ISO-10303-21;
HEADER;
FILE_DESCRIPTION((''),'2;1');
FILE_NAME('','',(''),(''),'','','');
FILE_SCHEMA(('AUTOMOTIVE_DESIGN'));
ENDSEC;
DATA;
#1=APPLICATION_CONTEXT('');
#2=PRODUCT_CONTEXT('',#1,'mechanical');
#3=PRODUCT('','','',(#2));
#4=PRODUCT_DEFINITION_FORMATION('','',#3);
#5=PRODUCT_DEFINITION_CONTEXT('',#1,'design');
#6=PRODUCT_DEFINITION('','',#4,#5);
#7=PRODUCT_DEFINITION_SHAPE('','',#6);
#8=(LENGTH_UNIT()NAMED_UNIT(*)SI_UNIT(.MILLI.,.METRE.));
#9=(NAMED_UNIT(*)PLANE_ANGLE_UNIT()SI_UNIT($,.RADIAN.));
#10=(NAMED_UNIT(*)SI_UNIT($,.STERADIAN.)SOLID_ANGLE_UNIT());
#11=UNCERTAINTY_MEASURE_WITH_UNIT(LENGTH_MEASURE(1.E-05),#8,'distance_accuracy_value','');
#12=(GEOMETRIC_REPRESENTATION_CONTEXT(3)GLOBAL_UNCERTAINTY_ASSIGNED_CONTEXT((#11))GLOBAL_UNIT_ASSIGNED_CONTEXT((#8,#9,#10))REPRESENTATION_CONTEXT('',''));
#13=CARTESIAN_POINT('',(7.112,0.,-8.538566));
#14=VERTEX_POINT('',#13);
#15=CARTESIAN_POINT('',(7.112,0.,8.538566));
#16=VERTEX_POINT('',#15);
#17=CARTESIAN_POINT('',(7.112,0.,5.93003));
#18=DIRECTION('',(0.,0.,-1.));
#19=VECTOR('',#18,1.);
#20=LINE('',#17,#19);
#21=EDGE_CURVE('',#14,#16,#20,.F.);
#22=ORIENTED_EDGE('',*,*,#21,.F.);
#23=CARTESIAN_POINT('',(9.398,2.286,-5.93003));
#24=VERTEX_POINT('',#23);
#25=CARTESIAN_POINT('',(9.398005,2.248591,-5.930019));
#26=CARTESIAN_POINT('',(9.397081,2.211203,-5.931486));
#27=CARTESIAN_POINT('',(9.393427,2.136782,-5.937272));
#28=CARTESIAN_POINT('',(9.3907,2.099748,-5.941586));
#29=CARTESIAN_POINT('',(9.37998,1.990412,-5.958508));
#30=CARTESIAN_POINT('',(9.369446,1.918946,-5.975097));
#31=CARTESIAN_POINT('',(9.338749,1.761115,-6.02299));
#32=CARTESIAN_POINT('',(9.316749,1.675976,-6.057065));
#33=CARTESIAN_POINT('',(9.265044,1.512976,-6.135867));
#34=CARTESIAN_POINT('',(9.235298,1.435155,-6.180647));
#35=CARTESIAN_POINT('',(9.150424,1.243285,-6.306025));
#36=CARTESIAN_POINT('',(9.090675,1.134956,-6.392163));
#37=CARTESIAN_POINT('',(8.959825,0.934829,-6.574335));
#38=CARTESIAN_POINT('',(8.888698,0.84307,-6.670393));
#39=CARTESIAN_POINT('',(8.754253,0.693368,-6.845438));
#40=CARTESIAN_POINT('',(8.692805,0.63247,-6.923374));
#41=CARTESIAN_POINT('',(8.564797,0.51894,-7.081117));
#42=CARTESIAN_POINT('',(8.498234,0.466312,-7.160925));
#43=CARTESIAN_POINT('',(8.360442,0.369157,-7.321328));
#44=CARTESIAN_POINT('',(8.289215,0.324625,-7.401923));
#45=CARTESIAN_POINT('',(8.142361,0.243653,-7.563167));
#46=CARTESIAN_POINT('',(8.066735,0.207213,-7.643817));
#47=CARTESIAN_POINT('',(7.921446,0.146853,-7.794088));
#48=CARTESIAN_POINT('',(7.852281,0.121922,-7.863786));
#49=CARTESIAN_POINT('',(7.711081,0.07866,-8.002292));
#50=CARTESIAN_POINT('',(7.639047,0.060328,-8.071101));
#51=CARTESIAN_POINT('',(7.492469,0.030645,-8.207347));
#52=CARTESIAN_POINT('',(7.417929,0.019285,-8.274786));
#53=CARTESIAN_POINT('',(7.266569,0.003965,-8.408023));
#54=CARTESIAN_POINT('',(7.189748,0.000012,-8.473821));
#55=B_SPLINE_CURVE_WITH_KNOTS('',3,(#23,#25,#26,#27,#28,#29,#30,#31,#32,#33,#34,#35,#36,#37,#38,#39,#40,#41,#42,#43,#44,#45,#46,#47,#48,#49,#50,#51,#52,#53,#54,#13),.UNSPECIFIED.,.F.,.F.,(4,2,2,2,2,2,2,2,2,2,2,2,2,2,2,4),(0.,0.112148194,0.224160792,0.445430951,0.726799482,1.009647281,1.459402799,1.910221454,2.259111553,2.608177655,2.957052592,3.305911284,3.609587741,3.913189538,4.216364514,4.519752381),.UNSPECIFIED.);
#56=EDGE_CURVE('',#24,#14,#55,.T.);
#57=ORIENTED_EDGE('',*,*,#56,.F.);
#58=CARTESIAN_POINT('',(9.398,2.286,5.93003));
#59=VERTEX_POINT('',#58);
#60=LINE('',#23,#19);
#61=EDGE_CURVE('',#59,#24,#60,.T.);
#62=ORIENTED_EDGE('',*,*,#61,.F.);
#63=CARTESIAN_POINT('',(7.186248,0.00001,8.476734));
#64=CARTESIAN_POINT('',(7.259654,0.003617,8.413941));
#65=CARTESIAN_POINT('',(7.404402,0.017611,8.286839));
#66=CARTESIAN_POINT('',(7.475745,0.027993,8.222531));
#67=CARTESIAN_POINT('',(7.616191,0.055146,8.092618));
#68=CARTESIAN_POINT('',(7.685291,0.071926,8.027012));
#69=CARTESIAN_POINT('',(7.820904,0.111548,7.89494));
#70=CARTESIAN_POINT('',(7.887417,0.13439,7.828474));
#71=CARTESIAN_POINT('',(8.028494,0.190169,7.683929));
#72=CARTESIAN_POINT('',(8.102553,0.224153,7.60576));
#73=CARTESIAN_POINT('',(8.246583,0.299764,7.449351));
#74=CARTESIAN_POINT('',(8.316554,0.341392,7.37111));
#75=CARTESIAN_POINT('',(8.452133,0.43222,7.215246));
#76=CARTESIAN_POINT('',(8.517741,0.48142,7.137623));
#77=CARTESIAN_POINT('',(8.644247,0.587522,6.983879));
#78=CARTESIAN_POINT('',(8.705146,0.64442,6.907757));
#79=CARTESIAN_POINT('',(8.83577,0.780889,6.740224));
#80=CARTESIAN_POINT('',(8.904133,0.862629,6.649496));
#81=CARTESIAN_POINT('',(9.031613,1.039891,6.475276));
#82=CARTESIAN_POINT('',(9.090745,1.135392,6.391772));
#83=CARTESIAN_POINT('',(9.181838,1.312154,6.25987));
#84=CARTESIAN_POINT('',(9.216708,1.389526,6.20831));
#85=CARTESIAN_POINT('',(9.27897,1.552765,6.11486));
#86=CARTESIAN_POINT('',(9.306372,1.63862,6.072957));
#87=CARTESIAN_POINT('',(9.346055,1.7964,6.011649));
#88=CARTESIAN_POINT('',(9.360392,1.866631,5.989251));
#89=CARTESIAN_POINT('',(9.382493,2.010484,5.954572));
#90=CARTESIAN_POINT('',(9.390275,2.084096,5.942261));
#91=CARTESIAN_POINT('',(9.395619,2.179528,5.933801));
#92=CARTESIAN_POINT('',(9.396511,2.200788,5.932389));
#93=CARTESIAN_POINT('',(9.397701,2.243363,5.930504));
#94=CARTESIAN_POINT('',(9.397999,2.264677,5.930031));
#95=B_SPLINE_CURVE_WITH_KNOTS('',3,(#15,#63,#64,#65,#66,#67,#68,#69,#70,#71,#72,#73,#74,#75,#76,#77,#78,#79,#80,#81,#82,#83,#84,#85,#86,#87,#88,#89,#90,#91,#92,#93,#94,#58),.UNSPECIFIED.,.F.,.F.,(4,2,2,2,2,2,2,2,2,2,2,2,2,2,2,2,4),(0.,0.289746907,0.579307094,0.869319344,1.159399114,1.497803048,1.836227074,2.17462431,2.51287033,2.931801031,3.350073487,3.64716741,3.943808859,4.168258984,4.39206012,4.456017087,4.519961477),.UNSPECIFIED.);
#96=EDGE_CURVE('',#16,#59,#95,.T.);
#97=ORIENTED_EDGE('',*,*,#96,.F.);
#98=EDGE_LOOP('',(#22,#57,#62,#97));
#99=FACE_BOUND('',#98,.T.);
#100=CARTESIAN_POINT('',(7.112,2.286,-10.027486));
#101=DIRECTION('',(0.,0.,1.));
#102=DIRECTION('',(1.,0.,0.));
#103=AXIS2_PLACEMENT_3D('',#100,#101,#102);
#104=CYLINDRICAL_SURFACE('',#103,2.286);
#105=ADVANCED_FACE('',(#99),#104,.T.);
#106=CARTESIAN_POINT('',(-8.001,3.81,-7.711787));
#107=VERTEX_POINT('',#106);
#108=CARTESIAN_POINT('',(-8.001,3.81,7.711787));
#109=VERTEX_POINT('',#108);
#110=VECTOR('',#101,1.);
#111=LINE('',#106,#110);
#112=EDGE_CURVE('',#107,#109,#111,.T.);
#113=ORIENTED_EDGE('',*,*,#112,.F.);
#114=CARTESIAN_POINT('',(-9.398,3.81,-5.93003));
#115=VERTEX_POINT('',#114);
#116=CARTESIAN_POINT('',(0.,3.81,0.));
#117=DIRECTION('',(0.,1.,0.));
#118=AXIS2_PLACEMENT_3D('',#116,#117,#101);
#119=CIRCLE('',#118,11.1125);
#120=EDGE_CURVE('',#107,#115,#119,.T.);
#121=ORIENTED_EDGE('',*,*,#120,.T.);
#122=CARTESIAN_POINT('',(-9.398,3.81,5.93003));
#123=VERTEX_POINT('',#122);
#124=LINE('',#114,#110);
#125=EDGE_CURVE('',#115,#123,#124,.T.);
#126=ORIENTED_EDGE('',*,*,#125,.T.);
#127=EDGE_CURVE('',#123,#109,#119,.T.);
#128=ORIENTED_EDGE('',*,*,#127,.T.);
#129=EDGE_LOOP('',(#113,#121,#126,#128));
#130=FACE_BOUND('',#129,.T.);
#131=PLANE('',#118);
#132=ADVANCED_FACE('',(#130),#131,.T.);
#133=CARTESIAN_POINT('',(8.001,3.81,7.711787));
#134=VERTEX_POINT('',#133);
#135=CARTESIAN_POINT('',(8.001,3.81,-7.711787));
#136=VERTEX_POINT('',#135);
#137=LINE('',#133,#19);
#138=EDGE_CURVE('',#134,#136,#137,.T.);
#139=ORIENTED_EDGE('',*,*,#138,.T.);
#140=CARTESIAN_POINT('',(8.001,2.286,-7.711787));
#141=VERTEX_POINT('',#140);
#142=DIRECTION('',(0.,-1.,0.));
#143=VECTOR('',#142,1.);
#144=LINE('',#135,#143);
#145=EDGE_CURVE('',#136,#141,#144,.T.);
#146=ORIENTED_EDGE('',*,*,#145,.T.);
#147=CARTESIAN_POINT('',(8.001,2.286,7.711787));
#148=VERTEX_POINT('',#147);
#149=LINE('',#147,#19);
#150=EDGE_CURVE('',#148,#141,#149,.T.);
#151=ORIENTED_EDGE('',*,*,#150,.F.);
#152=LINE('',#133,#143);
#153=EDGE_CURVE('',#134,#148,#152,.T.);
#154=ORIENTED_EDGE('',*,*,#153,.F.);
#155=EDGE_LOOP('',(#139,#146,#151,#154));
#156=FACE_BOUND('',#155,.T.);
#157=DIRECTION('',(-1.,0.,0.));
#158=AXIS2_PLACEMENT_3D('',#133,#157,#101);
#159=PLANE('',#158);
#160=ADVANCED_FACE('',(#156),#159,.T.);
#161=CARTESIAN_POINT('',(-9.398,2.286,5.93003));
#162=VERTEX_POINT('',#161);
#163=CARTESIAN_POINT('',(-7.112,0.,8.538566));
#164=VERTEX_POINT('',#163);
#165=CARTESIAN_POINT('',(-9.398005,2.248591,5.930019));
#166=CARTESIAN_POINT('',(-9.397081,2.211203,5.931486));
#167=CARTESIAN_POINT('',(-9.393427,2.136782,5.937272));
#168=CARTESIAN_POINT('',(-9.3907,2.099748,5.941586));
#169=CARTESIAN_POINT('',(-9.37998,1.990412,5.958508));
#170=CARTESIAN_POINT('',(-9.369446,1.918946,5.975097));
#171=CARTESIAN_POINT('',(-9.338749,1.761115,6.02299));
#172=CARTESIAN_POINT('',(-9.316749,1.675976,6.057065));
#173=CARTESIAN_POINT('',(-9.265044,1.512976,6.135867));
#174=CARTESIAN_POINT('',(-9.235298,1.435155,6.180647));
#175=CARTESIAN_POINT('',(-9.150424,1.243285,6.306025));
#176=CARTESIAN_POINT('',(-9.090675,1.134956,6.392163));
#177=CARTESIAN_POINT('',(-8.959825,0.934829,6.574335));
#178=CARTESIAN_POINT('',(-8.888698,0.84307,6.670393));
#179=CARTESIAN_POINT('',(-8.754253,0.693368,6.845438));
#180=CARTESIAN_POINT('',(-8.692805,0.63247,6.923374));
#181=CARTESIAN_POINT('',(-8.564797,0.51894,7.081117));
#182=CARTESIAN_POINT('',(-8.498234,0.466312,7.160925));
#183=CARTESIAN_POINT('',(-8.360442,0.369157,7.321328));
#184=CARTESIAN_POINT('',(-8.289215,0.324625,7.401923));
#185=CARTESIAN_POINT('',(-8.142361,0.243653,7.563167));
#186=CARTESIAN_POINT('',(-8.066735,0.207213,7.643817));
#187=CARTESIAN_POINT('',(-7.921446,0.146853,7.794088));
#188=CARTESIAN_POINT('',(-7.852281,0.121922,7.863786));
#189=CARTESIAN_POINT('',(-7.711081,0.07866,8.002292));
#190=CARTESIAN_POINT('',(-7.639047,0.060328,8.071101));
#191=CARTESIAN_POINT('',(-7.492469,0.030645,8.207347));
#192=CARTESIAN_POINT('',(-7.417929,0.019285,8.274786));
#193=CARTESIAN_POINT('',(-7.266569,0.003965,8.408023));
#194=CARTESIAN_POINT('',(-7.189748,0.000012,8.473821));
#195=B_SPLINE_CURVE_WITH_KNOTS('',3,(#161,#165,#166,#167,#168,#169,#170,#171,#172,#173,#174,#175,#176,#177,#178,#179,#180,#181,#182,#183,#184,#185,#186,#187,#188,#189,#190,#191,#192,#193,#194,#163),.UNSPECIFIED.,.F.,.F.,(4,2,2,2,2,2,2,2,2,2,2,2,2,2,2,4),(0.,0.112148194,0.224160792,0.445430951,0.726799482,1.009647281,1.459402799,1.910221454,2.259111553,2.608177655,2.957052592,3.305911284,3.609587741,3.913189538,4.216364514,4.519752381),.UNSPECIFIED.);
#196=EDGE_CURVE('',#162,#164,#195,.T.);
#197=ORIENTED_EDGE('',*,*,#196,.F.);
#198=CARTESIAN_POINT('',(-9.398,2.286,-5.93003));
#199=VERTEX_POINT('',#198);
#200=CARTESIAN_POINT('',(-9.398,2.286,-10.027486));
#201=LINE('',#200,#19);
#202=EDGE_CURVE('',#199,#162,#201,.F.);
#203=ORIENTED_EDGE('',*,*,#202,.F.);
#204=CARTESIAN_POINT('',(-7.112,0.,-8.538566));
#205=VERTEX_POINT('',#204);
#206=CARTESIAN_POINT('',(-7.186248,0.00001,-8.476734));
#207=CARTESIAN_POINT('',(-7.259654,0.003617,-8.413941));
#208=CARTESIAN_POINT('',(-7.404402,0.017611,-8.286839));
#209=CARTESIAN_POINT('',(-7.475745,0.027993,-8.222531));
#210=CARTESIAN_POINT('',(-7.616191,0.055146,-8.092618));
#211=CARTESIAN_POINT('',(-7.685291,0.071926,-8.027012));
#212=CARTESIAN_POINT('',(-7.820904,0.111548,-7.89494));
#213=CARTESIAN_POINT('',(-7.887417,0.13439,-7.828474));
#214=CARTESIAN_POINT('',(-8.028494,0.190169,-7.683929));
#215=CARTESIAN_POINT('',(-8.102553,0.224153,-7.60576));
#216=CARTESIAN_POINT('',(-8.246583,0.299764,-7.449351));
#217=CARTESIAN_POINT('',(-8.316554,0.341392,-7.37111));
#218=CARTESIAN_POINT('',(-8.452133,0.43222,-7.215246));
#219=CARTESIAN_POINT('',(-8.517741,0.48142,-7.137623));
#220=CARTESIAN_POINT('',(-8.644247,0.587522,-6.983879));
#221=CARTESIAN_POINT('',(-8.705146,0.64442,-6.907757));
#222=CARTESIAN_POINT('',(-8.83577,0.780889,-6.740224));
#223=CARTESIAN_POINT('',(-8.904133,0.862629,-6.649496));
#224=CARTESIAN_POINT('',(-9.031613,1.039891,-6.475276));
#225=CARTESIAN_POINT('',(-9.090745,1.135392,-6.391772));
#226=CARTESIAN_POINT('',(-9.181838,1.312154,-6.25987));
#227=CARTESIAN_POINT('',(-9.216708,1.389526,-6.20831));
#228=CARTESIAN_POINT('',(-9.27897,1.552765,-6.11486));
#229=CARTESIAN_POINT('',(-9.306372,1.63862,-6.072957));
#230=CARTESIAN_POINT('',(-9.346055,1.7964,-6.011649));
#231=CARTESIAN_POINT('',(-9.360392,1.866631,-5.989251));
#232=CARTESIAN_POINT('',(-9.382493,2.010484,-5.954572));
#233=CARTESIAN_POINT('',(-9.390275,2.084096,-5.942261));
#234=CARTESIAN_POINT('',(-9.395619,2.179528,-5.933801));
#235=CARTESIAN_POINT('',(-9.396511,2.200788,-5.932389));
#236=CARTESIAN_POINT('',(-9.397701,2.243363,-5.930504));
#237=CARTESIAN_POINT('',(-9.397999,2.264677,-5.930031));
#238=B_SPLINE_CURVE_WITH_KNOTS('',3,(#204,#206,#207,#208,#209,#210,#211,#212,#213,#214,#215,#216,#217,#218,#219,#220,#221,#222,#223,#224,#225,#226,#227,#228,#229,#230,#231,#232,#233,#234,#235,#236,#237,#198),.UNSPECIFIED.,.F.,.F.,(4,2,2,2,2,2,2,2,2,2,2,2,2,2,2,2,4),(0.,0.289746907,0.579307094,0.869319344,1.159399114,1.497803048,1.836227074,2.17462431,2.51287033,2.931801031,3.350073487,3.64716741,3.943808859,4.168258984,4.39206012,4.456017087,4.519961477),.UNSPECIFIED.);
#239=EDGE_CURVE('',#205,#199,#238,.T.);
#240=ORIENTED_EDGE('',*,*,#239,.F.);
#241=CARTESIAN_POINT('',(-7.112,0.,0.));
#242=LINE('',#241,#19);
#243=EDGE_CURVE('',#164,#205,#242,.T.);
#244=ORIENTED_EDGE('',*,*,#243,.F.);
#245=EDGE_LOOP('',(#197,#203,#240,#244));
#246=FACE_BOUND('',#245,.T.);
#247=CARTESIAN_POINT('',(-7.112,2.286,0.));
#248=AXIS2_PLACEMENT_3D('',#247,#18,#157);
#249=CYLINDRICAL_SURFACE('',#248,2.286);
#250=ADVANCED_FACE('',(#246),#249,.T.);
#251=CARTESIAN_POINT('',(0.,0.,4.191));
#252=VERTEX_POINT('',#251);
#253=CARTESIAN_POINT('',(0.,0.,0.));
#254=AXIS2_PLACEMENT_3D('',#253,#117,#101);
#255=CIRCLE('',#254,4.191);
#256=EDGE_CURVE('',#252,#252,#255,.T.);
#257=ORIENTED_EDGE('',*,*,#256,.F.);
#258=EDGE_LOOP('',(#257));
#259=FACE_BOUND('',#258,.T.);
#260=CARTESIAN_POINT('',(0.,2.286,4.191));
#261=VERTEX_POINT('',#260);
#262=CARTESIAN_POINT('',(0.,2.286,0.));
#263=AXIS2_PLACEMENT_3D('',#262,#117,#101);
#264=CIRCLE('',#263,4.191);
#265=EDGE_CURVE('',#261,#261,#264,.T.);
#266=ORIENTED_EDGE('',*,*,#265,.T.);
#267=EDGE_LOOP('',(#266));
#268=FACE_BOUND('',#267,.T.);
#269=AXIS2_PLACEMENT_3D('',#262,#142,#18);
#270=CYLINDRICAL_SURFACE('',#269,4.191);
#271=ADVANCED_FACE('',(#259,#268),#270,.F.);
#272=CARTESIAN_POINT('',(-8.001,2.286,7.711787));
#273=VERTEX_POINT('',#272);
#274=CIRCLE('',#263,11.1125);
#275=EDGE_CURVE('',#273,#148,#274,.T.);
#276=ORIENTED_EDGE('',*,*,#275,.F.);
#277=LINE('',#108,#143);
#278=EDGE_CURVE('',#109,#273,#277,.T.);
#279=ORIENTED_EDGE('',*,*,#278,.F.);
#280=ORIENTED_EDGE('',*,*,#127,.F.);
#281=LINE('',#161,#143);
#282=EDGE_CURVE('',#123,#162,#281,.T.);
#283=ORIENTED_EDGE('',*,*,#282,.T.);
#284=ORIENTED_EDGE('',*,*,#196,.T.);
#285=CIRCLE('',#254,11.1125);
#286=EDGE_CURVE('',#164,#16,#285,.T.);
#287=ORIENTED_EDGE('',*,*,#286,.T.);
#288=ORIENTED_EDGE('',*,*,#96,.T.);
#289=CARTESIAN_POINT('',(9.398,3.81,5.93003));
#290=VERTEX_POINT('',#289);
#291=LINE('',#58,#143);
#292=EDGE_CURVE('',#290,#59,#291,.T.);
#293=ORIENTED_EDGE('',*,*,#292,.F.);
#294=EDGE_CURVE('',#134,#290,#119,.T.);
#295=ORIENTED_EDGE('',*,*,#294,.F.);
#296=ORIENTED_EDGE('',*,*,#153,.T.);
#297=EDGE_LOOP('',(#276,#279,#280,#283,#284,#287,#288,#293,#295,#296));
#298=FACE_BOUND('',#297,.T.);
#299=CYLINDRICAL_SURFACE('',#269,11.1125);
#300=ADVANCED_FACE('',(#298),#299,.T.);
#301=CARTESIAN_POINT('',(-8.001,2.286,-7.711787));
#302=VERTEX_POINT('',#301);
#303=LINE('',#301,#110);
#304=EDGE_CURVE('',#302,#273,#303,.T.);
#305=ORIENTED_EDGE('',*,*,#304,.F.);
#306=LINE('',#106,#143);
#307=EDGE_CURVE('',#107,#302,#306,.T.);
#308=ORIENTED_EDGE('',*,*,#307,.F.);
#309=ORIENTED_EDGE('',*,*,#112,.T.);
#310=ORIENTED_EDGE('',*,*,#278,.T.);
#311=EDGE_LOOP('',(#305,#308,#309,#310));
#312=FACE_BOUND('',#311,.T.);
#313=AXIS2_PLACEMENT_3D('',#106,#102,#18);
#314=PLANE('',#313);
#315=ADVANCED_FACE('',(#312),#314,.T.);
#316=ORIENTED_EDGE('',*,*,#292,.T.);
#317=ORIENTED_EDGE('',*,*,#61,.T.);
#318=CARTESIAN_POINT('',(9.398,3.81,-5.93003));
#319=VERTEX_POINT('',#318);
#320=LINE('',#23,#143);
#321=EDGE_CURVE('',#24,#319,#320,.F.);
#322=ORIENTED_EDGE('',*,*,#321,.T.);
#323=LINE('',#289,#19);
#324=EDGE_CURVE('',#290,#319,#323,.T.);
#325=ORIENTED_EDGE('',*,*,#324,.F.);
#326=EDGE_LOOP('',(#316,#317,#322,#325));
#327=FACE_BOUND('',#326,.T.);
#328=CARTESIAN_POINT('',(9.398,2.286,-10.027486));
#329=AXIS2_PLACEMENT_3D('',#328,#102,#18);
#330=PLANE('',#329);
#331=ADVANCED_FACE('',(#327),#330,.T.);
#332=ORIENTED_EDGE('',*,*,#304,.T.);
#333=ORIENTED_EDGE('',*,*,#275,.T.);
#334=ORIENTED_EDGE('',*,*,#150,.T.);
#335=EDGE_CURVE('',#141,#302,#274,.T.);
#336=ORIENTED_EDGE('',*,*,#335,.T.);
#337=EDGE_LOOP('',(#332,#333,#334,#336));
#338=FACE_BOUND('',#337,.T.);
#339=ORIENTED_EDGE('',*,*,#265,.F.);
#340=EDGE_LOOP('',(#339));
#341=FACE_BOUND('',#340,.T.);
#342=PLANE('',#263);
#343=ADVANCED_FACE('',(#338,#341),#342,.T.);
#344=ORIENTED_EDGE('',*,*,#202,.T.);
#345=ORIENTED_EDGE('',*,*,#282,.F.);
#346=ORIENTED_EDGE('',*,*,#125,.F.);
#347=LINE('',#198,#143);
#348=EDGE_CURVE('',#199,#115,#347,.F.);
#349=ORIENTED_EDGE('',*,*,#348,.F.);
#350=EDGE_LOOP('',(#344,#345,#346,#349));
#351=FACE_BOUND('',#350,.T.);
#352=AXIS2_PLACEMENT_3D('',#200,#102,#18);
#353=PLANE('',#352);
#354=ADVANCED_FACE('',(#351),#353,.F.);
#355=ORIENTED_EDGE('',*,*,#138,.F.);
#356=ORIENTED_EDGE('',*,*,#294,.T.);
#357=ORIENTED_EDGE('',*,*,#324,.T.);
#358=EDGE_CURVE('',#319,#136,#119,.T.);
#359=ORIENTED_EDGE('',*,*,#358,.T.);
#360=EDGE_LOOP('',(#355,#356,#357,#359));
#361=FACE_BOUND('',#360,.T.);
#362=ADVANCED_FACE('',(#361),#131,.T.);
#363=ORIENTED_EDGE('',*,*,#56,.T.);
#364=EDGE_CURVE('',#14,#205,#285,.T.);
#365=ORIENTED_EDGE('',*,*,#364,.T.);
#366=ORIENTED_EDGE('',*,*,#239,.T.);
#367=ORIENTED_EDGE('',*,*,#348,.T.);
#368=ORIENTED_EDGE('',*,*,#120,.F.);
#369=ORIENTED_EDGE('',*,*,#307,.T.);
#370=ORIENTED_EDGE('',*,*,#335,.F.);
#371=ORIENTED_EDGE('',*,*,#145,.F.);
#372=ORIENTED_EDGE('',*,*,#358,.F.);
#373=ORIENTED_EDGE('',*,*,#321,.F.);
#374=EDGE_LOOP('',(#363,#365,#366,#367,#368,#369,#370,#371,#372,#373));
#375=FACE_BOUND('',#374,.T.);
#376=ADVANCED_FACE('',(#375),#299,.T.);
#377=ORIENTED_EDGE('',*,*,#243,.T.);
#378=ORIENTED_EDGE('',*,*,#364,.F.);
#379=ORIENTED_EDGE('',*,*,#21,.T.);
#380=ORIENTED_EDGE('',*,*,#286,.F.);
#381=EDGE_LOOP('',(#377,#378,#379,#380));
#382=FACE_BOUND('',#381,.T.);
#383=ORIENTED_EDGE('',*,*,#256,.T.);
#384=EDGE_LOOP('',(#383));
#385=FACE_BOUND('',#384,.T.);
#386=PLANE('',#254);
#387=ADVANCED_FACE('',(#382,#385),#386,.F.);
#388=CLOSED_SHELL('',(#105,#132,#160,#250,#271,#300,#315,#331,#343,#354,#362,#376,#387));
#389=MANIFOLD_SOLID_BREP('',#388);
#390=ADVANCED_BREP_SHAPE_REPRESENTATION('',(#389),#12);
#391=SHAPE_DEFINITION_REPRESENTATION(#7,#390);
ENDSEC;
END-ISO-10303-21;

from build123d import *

# Parameters (mm, degrees)
SKETCH1_R           = 11.1125
SKETCH1_R_2         = 4.191
BASE_EXTRUDE_DEPTH  = 2.286
CUT_EXTRUDE1_DEPTH  = 16.880840925
BOSS_EXTRUDE1_DEPTH = 1.524
FILLET1_R           = 2.286


with BuildPart() as part:
    # Sketch1 → Base-Extrude (new body)
    with BuildSketch(Plane(origin=(0, 0, 0), x_dir=(-1, 0, 0), z_dir=(0, 1, 0))):
        with Locations(Location((0, 0, 0), (0, 0, 90))):
            Circle(SKETCH1_R)
        with Locations(Location((0, 0, 0), (0, 0, 90))):
            Circle(SKETCH1_R_2, mode=Mode.SUBTRACT)
    extrude(amount=BASE_EXTRUDE_DEPTH)

    # Sketch2 → Cut-Extrude1 (cut, through all)
    with BuildSketch(Plane(origin=(0, 2.286, 0), x_dir=(-1, 0, 0), z_dir=(0, 1, 0))):
        with BuildLine():
            Line((9.398, 5.930029701), (9.398, -5.930029701))
            ThreePointArc((9.398, -5.930029701), (11.1125, 0), (9.398, 5.930029701))
        make_face()
        with BuildLine():
            ThreePointArc((-9.398, 5.930029701), (-11.1125, 0), (-9.398, -5.930029701))
            Line((-9.398, -5.930029701), (-9.398, 5.930029701))
        make_face()
    extrude(amount=-CUT_EXTRUDE1_DEPTH, mode=Mode.SUBTRACT)

    # Sketch3 → Boss-Extrude1 (add)
    with BuildSketch(Plane(origin=(0, 2.286, 0), x_dir=(-1, 0, 0), z_dir=(0, 1, 0))):
        with BuildLine():
            Line((8.001, -7.711786774), (8.001, 7.711786774))
            ThreePointArc((8.001, 7.711786774), (8.744996559, 6.856580156), (9.398, 5.930029701))
            Line((9.398, 5.930029701), (9.398, -5.930029701))
            ThreePointArc((9.398, -5.930029701), (8.744996559, -6.856580156), (8.001, -7.711786774))
        make_face()
        with BuildLine():
            Line((-8.001, 7.711786774), (-8.001, -7.711786774))
            ThreePointArc((-8.001, -7.711786774), (-8.744996559, -6.856580156), (-9.398, -5.930029701))
            Line((-9.398, -5.930029701), (-9.398, 5.930029701))
            ThreePointArc((-9.398, 5.930029701), (-8.744996559, 6.856580156), (-8.001, 7.711786774))
        make_face()
    extrude(amount=BOSS_EXTRUDE1_DEPTH)

    # Fillet1
    fillet1_edges = [part.edges().sort_by_distance(p)[0] for p in [
        (9.398, 0, 0),
        (-9.398, 0, 0),
    ]]
    fillet(fillet1_edges, radius=FILLET1_R - 0.0001)  # a hair under: the kernel refuses the full size


solid = part.part
